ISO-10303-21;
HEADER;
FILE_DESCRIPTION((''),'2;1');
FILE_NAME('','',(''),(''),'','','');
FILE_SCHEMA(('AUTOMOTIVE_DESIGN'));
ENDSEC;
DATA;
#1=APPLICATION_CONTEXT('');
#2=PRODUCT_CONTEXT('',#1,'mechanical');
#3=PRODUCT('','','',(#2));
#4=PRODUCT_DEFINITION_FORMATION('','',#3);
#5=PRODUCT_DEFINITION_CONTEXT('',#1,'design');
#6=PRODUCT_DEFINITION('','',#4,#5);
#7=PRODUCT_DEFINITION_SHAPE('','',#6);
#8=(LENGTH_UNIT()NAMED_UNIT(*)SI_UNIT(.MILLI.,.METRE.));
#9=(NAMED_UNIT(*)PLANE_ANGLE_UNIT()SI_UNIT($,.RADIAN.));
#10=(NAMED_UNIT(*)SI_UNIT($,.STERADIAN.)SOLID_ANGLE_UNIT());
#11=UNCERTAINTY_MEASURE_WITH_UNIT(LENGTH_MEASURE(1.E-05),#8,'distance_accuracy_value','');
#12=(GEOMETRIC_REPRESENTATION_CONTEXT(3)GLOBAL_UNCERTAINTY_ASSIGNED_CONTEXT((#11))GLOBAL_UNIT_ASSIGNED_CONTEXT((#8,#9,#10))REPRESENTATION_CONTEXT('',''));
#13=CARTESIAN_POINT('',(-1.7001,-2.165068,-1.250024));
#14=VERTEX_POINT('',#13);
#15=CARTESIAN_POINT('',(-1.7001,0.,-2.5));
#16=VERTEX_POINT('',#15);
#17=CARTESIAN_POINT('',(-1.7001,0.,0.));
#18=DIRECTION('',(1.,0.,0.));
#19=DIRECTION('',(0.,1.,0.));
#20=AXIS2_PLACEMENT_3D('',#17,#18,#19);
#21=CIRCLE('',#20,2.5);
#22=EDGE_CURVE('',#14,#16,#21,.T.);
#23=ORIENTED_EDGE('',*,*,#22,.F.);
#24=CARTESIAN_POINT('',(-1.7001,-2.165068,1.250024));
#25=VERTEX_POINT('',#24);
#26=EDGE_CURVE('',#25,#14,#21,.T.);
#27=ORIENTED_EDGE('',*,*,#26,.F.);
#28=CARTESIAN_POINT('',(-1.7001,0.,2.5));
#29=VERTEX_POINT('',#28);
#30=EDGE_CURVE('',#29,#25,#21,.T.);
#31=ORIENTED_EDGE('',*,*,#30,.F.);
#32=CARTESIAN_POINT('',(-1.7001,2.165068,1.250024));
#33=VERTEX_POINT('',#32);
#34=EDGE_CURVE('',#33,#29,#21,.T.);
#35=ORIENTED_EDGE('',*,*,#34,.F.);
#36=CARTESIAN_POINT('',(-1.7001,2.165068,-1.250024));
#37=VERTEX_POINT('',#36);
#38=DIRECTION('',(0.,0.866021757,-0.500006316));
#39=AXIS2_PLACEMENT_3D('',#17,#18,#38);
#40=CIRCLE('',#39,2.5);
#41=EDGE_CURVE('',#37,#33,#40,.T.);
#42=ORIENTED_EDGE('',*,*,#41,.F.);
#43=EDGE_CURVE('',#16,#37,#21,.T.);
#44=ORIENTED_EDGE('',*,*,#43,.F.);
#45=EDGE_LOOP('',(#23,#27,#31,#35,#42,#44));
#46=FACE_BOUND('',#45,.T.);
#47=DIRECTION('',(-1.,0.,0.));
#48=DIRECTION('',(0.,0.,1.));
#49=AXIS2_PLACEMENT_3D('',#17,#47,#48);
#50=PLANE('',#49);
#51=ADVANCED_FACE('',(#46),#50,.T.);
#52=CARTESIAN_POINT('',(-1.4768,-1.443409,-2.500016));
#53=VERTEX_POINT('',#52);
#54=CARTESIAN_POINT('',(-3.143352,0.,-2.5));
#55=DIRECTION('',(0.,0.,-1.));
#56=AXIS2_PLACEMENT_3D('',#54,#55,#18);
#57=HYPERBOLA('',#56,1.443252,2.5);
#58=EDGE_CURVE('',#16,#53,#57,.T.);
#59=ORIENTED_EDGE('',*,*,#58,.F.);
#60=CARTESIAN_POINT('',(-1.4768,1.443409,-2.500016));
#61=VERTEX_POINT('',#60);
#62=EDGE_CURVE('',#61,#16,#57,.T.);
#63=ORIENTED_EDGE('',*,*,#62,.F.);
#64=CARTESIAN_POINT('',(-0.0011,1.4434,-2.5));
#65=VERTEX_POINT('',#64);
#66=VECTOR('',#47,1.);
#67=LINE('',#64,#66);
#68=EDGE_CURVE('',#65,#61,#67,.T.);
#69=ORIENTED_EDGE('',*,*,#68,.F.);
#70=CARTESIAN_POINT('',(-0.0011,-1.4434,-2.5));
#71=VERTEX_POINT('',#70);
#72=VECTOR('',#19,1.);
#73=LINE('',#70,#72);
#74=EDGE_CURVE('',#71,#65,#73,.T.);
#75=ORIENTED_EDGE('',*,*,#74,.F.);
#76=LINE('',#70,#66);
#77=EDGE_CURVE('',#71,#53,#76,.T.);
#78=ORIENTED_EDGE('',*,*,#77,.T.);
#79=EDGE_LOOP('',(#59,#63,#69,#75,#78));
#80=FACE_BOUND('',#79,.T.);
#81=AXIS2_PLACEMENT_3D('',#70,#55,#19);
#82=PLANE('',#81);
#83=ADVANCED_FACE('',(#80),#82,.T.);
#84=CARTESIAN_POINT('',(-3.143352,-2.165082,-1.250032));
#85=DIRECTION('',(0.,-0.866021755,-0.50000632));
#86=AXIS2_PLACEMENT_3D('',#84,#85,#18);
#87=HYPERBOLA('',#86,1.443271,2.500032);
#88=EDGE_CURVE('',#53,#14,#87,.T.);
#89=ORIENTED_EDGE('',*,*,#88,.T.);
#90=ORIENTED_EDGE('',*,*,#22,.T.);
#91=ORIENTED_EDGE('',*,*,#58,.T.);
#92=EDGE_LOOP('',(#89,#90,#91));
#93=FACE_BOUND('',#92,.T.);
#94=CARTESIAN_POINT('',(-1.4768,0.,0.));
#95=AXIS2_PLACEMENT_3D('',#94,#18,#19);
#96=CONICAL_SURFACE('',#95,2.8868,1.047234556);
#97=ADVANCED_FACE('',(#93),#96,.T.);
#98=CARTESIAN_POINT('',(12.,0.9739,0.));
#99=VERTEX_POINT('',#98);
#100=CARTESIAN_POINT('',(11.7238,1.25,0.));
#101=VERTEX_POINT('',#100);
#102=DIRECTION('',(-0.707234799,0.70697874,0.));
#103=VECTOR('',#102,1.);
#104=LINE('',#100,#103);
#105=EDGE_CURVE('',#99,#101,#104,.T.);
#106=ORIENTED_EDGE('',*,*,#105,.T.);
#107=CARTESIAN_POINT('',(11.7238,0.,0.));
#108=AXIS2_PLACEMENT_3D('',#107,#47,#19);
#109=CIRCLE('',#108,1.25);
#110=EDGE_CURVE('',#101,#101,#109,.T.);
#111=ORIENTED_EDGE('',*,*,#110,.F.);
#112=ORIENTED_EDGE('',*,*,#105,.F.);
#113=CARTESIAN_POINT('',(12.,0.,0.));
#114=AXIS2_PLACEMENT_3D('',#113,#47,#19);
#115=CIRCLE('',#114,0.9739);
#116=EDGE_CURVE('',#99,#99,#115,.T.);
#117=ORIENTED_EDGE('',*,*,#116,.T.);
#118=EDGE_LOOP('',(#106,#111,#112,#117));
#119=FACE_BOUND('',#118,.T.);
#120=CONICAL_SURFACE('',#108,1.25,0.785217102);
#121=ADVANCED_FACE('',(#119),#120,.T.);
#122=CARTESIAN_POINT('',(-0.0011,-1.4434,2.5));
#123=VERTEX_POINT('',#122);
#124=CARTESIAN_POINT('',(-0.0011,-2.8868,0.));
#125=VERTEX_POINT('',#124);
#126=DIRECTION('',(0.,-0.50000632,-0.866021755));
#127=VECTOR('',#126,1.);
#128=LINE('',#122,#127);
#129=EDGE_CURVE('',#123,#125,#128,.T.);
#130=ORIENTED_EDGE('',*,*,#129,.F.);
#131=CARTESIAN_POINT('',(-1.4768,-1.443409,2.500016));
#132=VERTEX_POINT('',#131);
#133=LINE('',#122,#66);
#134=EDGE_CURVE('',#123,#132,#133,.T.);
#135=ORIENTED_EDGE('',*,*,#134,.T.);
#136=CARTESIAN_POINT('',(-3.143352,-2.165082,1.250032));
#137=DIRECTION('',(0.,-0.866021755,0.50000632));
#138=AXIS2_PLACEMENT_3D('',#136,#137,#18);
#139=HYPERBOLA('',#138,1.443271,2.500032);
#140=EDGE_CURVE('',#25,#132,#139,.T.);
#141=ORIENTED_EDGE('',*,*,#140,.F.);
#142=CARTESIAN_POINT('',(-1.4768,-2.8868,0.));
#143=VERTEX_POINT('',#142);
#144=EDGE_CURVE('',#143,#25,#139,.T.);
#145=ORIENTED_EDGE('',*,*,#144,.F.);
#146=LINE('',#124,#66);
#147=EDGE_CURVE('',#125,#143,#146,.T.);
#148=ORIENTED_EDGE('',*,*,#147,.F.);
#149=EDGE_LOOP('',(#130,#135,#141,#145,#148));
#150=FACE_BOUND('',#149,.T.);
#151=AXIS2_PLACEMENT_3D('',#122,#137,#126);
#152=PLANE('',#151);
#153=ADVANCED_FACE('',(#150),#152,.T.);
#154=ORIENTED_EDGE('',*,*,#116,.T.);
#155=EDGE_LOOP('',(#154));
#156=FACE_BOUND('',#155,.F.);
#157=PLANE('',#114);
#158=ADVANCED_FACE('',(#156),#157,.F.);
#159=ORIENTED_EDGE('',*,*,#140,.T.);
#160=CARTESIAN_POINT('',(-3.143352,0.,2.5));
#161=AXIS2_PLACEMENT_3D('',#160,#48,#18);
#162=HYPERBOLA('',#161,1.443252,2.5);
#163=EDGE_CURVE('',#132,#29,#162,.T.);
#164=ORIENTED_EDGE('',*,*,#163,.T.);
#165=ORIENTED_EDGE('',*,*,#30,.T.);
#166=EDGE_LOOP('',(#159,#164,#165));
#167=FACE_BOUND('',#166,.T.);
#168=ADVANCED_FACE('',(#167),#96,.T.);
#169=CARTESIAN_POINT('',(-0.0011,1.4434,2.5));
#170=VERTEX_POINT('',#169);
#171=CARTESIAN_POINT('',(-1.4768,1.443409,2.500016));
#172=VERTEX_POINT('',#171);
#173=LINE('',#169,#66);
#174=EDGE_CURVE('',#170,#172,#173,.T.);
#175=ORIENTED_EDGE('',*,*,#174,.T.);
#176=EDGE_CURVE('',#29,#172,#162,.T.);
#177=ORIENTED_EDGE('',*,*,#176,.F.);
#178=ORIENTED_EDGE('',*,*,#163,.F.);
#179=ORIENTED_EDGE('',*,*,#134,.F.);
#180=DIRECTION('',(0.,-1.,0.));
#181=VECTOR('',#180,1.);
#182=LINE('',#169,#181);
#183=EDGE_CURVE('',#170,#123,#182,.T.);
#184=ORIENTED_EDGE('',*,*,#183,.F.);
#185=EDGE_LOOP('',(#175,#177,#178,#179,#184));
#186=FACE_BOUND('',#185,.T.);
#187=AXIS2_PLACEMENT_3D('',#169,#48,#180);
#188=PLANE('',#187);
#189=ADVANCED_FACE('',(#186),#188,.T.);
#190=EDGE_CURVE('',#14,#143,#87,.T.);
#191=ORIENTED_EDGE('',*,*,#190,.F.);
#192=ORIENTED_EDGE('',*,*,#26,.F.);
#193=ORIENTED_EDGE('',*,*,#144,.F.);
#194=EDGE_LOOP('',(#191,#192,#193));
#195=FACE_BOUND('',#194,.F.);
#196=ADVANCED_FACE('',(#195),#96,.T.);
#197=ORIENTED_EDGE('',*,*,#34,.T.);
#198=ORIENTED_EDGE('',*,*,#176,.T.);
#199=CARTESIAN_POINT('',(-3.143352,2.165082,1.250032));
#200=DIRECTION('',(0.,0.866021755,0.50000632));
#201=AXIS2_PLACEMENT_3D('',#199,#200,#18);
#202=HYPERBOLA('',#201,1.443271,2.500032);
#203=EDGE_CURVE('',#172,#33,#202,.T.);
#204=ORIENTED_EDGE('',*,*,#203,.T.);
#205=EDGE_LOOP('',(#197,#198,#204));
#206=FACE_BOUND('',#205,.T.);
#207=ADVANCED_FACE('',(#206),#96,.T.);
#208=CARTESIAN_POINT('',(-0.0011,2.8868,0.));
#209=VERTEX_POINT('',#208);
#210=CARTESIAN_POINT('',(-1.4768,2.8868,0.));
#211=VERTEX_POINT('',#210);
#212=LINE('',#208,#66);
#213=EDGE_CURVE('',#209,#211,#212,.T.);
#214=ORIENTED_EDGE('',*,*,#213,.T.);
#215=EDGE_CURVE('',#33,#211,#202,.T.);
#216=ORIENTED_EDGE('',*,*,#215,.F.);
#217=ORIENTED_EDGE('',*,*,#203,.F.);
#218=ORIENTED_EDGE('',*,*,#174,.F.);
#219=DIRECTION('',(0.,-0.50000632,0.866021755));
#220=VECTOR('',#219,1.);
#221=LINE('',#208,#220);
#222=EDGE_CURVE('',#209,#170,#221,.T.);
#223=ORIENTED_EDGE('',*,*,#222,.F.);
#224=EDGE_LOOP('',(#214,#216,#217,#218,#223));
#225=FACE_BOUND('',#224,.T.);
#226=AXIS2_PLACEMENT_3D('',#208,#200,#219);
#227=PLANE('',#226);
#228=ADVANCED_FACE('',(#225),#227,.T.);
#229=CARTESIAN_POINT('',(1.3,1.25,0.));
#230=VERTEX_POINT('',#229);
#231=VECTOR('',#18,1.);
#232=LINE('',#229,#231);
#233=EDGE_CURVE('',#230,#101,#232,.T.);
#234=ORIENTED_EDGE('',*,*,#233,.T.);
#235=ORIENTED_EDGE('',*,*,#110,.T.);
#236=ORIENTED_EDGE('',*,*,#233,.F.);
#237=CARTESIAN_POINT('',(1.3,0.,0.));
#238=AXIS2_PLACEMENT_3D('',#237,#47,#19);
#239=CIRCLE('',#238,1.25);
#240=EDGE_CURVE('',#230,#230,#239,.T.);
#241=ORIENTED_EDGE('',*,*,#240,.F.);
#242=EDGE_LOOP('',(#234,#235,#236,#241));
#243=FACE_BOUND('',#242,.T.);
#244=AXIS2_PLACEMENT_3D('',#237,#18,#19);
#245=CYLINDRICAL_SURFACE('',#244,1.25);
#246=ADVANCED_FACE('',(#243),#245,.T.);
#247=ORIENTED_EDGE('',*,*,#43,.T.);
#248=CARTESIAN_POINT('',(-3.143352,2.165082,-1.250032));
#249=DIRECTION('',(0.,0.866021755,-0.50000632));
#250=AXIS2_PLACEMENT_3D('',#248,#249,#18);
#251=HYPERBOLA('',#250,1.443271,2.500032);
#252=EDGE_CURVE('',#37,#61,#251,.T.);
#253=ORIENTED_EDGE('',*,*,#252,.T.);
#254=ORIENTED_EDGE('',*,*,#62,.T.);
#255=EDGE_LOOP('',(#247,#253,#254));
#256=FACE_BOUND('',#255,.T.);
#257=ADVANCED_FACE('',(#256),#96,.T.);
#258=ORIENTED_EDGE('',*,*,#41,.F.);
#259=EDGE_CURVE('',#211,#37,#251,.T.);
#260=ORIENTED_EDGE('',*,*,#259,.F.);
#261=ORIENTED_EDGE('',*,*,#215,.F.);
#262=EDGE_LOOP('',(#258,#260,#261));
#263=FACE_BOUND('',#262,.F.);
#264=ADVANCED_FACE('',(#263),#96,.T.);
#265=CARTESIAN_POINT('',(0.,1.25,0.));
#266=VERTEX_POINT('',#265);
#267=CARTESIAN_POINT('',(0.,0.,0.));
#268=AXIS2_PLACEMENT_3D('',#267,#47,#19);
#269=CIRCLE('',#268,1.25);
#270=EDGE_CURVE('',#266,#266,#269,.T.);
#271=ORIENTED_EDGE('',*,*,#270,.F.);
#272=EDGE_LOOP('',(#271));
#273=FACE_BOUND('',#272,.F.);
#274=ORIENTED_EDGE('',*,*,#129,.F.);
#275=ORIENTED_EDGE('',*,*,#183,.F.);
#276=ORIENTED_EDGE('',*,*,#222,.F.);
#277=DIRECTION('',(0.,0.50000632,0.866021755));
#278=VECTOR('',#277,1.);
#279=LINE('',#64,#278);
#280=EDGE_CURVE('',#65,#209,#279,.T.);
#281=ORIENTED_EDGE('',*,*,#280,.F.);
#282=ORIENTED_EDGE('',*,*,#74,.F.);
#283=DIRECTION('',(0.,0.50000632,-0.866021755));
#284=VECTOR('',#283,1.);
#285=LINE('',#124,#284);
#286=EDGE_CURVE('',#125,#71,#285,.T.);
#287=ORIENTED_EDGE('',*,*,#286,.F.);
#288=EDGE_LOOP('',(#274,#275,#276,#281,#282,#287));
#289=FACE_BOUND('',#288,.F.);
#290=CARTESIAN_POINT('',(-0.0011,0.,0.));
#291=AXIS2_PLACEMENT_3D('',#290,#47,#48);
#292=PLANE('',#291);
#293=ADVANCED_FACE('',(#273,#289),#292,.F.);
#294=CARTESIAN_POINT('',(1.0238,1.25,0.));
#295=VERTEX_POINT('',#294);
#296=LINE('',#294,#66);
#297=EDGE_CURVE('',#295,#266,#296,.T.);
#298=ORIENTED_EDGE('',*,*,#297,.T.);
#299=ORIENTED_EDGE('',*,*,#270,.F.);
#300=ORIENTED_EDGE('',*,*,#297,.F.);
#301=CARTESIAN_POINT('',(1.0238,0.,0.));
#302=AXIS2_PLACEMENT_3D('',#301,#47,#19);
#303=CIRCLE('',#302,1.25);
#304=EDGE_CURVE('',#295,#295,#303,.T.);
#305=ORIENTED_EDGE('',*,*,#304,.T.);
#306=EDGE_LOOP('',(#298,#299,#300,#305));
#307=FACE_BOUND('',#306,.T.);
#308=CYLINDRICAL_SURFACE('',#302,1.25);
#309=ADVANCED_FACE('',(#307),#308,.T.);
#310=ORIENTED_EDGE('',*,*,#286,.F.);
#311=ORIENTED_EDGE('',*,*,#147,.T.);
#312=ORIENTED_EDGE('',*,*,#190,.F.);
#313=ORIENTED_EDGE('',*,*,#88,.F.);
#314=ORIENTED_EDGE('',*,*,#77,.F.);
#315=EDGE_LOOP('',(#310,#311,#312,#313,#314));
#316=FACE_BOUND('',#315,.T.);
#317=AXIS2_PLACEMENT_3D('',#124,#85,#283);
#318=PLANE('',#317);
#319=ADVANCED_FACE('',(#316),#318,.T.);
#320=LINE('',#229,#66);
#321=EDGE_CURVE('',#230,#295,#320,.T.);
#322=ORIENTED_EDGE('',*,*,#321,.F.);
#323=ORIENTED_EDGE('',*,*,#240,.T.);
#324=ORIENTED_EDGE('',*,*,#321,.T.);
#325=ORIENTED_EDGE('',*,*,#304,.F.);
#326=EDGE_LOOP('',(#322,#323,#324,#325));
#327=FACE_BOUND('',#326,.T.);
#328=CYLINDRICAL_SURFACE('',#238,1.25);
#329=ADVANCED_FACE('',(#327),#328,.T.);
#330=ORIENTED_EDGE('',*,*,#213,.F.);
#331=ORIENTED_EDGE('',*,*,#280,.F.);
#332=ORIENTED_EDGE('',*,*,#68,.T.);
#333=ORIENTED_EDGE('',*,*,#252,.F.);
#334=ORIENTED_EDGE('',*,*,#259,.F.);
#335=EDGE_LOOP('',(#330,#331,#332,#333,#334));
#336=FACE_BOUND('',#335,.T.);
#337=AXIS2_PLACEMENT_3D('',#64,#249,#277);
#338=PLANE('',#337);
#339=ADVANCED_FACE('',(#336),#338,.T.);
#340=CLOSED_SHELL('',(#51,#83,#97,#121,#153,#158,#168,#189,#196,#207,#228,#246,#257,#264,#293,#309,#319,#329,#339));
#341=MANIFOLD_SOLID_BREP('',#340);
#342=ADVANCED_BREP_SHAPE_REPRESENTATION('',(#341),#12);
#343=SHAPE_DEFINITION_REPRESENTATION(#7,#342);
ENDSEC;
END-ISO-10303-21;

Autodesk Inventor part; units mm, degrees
ref_plane "YZ Plane" through (0, 0, 0) normal (1, 0, 0) x (0, 1, 0)
ref_plane "XZ Plane" through (0, 0, 0) normal (0, 1, 0) x (-1, 0, 0)
sketch "Sketch1" plane through (0, 0, 0) normal (0, 0, 1) x (1, 0, 0)
  line L0 (0, 2.5) -> (0, 1.25)
  line L1 (1.3, 1.25) -> (12, 1.25)
  line L2 (12, 1.25) -> (12, 0)
  line L3 (12, 0) -> (-0.0011, 0)
  line L4 (-2.4013, 0) -> (14.4002, 0) projected
  line L5 (-0.0011, 0) -> (-0.0011, 2.5)
  line L6 (-0.0011, 2.5) -> (0, 2.5)
  line L7 (1.3, 1.25) -> (1.0238, 1.25)
  line L8 (1.0238, 1.25) -> (0, 1.25)
  line L9 (0, -0.5) -> (0, 3) projected
  dimension "d0" = 12
  dimension "d1" = 10.7
  dimension "d2" = 2.5
  dimension "d9" = 0.0011
  dimension "d10" = 5
  dimension "d13" = 0.2762
  dimension "d14" = 2.5
revolve "Body" add sketch "Sketch1" angle 360 about axis through (12, 0, 0) along (-1, 0, 0)
sketch "Sketch2" plane through (-0.0011, 0, 0) normal (-1, 0, 0) x (0, 0, 1)
  line L0 (0, 2.8868) -> (2.5, 1.4434)
  line L1 (2.5, 1.4434) -> (2.5, -1.4434)
  line L2 (2.5, -1.4434) -> (0, -2.8868)
  line L3 (0, -2.8868) -> (-2.5, -1.4434)
  line L4 (-2.5, -1.4434) -> (-2.5, 1.4434)
  line L5 (-2.5, 1.4434) -> (0, 2.8868)
  point P0 (0, 0)
  point P1 (0, 0)
  dimension "d11" = 5
extrude "Head" add sketch "Sketch2" along normal blind 1.699
sketch "Sketch4" plane through (0, 0, 0) normal (0, 0, 1) x (1, 0, 0)
  line L0 (-1.7001, 2.5) -> (-1.7001, 2.8868)
  line L1 (-1.7001, 2.8868) -> (-1.4768, 2.8868)
  line L2 (-1.4768, 2.8868) -> (-1.7001, 2.5)
  line L3 (-2.0399, 0) -> (0.3387, 0) projected
  line L4 (-0.0011, 2.8868) -> (-1.7001, 2.8868) projected
  line L5 (-1.7001, 1.4434) -> (-1.7001, 2.8868) projected
  dimension "d5" = 30
  dimension "d19" = 5
revolve "Chamfer1" cut sketch "Sketch4" angle 360 about axis through (-10, 0, 0) along (1, 0, 0)
thread "Thread" size "M2.5x0.45" class "6g" standard "ISO Metric profile" length 10.7
chamfer "Chamfer2" distance 0.2761 distance2 0.2762 1 edges at (12, -1.25, 0) measured on face at (12, 0.2404, -0.7656)
ref_plane "Work Plane1" through (1.525, 0, 0) normal (0, 0, 1) x (1, 0, 0)
equation "\"d0\" = NLG"
equation "\"d1\" = GEL"
equation "\"d2\" = GD"
equation "\"d10\" = SD2"
equation "\"d14\" = BDM"
equation "\"d11\" = SW"
equation "\"d3\" = KOH - SD"
equation "\"d5\" = ANG1"
equation "\"d19\" = SW0"
equation "\"d15\" = GEL"
equation "\"d6\" = -0.5 * SPD + 0.5 * GD"
equation "\"NLG\" = 12"
equation "\"GD\" = NND"
equation "\"BDM\" = NND"
equation "\"KOH\" = 1.7"
equation "\"GEL\" = 10.7"
equation "\"SW\" = 5"
equation "\"SW0\" = SW"
equation "\"SPD\" = NND - 1.2269 * PTC"
equation "\"SD2\" = SW"
equation "\"SD\" = 0.001"
equation "\"ANG1\" = 30deg"
equation "\"GAL\" = 0.61345 * PTC"
equation "\"GUL\" = 0.61345 * PTC"
equation "\"RR\" = 0.001"
equation "\"WFT\" = SD"
equation "\"GD1\" = THREADDIA - 1.2269 * PTC"
equation "\"THREADDIA\" = 2.5"
equation "\"SDH\" = SW"
equation "\"TOA\" = 30deg"
equation "\"FAWI\" = 45deg"
equation "\"PTC\" = 0.45"
equation "\"NND\" = 2.5"
equation "\"E0\" = 1.155 * SW"
properties part number "AS 1110 - M2,5 x 12" material "Steel, Mild"
